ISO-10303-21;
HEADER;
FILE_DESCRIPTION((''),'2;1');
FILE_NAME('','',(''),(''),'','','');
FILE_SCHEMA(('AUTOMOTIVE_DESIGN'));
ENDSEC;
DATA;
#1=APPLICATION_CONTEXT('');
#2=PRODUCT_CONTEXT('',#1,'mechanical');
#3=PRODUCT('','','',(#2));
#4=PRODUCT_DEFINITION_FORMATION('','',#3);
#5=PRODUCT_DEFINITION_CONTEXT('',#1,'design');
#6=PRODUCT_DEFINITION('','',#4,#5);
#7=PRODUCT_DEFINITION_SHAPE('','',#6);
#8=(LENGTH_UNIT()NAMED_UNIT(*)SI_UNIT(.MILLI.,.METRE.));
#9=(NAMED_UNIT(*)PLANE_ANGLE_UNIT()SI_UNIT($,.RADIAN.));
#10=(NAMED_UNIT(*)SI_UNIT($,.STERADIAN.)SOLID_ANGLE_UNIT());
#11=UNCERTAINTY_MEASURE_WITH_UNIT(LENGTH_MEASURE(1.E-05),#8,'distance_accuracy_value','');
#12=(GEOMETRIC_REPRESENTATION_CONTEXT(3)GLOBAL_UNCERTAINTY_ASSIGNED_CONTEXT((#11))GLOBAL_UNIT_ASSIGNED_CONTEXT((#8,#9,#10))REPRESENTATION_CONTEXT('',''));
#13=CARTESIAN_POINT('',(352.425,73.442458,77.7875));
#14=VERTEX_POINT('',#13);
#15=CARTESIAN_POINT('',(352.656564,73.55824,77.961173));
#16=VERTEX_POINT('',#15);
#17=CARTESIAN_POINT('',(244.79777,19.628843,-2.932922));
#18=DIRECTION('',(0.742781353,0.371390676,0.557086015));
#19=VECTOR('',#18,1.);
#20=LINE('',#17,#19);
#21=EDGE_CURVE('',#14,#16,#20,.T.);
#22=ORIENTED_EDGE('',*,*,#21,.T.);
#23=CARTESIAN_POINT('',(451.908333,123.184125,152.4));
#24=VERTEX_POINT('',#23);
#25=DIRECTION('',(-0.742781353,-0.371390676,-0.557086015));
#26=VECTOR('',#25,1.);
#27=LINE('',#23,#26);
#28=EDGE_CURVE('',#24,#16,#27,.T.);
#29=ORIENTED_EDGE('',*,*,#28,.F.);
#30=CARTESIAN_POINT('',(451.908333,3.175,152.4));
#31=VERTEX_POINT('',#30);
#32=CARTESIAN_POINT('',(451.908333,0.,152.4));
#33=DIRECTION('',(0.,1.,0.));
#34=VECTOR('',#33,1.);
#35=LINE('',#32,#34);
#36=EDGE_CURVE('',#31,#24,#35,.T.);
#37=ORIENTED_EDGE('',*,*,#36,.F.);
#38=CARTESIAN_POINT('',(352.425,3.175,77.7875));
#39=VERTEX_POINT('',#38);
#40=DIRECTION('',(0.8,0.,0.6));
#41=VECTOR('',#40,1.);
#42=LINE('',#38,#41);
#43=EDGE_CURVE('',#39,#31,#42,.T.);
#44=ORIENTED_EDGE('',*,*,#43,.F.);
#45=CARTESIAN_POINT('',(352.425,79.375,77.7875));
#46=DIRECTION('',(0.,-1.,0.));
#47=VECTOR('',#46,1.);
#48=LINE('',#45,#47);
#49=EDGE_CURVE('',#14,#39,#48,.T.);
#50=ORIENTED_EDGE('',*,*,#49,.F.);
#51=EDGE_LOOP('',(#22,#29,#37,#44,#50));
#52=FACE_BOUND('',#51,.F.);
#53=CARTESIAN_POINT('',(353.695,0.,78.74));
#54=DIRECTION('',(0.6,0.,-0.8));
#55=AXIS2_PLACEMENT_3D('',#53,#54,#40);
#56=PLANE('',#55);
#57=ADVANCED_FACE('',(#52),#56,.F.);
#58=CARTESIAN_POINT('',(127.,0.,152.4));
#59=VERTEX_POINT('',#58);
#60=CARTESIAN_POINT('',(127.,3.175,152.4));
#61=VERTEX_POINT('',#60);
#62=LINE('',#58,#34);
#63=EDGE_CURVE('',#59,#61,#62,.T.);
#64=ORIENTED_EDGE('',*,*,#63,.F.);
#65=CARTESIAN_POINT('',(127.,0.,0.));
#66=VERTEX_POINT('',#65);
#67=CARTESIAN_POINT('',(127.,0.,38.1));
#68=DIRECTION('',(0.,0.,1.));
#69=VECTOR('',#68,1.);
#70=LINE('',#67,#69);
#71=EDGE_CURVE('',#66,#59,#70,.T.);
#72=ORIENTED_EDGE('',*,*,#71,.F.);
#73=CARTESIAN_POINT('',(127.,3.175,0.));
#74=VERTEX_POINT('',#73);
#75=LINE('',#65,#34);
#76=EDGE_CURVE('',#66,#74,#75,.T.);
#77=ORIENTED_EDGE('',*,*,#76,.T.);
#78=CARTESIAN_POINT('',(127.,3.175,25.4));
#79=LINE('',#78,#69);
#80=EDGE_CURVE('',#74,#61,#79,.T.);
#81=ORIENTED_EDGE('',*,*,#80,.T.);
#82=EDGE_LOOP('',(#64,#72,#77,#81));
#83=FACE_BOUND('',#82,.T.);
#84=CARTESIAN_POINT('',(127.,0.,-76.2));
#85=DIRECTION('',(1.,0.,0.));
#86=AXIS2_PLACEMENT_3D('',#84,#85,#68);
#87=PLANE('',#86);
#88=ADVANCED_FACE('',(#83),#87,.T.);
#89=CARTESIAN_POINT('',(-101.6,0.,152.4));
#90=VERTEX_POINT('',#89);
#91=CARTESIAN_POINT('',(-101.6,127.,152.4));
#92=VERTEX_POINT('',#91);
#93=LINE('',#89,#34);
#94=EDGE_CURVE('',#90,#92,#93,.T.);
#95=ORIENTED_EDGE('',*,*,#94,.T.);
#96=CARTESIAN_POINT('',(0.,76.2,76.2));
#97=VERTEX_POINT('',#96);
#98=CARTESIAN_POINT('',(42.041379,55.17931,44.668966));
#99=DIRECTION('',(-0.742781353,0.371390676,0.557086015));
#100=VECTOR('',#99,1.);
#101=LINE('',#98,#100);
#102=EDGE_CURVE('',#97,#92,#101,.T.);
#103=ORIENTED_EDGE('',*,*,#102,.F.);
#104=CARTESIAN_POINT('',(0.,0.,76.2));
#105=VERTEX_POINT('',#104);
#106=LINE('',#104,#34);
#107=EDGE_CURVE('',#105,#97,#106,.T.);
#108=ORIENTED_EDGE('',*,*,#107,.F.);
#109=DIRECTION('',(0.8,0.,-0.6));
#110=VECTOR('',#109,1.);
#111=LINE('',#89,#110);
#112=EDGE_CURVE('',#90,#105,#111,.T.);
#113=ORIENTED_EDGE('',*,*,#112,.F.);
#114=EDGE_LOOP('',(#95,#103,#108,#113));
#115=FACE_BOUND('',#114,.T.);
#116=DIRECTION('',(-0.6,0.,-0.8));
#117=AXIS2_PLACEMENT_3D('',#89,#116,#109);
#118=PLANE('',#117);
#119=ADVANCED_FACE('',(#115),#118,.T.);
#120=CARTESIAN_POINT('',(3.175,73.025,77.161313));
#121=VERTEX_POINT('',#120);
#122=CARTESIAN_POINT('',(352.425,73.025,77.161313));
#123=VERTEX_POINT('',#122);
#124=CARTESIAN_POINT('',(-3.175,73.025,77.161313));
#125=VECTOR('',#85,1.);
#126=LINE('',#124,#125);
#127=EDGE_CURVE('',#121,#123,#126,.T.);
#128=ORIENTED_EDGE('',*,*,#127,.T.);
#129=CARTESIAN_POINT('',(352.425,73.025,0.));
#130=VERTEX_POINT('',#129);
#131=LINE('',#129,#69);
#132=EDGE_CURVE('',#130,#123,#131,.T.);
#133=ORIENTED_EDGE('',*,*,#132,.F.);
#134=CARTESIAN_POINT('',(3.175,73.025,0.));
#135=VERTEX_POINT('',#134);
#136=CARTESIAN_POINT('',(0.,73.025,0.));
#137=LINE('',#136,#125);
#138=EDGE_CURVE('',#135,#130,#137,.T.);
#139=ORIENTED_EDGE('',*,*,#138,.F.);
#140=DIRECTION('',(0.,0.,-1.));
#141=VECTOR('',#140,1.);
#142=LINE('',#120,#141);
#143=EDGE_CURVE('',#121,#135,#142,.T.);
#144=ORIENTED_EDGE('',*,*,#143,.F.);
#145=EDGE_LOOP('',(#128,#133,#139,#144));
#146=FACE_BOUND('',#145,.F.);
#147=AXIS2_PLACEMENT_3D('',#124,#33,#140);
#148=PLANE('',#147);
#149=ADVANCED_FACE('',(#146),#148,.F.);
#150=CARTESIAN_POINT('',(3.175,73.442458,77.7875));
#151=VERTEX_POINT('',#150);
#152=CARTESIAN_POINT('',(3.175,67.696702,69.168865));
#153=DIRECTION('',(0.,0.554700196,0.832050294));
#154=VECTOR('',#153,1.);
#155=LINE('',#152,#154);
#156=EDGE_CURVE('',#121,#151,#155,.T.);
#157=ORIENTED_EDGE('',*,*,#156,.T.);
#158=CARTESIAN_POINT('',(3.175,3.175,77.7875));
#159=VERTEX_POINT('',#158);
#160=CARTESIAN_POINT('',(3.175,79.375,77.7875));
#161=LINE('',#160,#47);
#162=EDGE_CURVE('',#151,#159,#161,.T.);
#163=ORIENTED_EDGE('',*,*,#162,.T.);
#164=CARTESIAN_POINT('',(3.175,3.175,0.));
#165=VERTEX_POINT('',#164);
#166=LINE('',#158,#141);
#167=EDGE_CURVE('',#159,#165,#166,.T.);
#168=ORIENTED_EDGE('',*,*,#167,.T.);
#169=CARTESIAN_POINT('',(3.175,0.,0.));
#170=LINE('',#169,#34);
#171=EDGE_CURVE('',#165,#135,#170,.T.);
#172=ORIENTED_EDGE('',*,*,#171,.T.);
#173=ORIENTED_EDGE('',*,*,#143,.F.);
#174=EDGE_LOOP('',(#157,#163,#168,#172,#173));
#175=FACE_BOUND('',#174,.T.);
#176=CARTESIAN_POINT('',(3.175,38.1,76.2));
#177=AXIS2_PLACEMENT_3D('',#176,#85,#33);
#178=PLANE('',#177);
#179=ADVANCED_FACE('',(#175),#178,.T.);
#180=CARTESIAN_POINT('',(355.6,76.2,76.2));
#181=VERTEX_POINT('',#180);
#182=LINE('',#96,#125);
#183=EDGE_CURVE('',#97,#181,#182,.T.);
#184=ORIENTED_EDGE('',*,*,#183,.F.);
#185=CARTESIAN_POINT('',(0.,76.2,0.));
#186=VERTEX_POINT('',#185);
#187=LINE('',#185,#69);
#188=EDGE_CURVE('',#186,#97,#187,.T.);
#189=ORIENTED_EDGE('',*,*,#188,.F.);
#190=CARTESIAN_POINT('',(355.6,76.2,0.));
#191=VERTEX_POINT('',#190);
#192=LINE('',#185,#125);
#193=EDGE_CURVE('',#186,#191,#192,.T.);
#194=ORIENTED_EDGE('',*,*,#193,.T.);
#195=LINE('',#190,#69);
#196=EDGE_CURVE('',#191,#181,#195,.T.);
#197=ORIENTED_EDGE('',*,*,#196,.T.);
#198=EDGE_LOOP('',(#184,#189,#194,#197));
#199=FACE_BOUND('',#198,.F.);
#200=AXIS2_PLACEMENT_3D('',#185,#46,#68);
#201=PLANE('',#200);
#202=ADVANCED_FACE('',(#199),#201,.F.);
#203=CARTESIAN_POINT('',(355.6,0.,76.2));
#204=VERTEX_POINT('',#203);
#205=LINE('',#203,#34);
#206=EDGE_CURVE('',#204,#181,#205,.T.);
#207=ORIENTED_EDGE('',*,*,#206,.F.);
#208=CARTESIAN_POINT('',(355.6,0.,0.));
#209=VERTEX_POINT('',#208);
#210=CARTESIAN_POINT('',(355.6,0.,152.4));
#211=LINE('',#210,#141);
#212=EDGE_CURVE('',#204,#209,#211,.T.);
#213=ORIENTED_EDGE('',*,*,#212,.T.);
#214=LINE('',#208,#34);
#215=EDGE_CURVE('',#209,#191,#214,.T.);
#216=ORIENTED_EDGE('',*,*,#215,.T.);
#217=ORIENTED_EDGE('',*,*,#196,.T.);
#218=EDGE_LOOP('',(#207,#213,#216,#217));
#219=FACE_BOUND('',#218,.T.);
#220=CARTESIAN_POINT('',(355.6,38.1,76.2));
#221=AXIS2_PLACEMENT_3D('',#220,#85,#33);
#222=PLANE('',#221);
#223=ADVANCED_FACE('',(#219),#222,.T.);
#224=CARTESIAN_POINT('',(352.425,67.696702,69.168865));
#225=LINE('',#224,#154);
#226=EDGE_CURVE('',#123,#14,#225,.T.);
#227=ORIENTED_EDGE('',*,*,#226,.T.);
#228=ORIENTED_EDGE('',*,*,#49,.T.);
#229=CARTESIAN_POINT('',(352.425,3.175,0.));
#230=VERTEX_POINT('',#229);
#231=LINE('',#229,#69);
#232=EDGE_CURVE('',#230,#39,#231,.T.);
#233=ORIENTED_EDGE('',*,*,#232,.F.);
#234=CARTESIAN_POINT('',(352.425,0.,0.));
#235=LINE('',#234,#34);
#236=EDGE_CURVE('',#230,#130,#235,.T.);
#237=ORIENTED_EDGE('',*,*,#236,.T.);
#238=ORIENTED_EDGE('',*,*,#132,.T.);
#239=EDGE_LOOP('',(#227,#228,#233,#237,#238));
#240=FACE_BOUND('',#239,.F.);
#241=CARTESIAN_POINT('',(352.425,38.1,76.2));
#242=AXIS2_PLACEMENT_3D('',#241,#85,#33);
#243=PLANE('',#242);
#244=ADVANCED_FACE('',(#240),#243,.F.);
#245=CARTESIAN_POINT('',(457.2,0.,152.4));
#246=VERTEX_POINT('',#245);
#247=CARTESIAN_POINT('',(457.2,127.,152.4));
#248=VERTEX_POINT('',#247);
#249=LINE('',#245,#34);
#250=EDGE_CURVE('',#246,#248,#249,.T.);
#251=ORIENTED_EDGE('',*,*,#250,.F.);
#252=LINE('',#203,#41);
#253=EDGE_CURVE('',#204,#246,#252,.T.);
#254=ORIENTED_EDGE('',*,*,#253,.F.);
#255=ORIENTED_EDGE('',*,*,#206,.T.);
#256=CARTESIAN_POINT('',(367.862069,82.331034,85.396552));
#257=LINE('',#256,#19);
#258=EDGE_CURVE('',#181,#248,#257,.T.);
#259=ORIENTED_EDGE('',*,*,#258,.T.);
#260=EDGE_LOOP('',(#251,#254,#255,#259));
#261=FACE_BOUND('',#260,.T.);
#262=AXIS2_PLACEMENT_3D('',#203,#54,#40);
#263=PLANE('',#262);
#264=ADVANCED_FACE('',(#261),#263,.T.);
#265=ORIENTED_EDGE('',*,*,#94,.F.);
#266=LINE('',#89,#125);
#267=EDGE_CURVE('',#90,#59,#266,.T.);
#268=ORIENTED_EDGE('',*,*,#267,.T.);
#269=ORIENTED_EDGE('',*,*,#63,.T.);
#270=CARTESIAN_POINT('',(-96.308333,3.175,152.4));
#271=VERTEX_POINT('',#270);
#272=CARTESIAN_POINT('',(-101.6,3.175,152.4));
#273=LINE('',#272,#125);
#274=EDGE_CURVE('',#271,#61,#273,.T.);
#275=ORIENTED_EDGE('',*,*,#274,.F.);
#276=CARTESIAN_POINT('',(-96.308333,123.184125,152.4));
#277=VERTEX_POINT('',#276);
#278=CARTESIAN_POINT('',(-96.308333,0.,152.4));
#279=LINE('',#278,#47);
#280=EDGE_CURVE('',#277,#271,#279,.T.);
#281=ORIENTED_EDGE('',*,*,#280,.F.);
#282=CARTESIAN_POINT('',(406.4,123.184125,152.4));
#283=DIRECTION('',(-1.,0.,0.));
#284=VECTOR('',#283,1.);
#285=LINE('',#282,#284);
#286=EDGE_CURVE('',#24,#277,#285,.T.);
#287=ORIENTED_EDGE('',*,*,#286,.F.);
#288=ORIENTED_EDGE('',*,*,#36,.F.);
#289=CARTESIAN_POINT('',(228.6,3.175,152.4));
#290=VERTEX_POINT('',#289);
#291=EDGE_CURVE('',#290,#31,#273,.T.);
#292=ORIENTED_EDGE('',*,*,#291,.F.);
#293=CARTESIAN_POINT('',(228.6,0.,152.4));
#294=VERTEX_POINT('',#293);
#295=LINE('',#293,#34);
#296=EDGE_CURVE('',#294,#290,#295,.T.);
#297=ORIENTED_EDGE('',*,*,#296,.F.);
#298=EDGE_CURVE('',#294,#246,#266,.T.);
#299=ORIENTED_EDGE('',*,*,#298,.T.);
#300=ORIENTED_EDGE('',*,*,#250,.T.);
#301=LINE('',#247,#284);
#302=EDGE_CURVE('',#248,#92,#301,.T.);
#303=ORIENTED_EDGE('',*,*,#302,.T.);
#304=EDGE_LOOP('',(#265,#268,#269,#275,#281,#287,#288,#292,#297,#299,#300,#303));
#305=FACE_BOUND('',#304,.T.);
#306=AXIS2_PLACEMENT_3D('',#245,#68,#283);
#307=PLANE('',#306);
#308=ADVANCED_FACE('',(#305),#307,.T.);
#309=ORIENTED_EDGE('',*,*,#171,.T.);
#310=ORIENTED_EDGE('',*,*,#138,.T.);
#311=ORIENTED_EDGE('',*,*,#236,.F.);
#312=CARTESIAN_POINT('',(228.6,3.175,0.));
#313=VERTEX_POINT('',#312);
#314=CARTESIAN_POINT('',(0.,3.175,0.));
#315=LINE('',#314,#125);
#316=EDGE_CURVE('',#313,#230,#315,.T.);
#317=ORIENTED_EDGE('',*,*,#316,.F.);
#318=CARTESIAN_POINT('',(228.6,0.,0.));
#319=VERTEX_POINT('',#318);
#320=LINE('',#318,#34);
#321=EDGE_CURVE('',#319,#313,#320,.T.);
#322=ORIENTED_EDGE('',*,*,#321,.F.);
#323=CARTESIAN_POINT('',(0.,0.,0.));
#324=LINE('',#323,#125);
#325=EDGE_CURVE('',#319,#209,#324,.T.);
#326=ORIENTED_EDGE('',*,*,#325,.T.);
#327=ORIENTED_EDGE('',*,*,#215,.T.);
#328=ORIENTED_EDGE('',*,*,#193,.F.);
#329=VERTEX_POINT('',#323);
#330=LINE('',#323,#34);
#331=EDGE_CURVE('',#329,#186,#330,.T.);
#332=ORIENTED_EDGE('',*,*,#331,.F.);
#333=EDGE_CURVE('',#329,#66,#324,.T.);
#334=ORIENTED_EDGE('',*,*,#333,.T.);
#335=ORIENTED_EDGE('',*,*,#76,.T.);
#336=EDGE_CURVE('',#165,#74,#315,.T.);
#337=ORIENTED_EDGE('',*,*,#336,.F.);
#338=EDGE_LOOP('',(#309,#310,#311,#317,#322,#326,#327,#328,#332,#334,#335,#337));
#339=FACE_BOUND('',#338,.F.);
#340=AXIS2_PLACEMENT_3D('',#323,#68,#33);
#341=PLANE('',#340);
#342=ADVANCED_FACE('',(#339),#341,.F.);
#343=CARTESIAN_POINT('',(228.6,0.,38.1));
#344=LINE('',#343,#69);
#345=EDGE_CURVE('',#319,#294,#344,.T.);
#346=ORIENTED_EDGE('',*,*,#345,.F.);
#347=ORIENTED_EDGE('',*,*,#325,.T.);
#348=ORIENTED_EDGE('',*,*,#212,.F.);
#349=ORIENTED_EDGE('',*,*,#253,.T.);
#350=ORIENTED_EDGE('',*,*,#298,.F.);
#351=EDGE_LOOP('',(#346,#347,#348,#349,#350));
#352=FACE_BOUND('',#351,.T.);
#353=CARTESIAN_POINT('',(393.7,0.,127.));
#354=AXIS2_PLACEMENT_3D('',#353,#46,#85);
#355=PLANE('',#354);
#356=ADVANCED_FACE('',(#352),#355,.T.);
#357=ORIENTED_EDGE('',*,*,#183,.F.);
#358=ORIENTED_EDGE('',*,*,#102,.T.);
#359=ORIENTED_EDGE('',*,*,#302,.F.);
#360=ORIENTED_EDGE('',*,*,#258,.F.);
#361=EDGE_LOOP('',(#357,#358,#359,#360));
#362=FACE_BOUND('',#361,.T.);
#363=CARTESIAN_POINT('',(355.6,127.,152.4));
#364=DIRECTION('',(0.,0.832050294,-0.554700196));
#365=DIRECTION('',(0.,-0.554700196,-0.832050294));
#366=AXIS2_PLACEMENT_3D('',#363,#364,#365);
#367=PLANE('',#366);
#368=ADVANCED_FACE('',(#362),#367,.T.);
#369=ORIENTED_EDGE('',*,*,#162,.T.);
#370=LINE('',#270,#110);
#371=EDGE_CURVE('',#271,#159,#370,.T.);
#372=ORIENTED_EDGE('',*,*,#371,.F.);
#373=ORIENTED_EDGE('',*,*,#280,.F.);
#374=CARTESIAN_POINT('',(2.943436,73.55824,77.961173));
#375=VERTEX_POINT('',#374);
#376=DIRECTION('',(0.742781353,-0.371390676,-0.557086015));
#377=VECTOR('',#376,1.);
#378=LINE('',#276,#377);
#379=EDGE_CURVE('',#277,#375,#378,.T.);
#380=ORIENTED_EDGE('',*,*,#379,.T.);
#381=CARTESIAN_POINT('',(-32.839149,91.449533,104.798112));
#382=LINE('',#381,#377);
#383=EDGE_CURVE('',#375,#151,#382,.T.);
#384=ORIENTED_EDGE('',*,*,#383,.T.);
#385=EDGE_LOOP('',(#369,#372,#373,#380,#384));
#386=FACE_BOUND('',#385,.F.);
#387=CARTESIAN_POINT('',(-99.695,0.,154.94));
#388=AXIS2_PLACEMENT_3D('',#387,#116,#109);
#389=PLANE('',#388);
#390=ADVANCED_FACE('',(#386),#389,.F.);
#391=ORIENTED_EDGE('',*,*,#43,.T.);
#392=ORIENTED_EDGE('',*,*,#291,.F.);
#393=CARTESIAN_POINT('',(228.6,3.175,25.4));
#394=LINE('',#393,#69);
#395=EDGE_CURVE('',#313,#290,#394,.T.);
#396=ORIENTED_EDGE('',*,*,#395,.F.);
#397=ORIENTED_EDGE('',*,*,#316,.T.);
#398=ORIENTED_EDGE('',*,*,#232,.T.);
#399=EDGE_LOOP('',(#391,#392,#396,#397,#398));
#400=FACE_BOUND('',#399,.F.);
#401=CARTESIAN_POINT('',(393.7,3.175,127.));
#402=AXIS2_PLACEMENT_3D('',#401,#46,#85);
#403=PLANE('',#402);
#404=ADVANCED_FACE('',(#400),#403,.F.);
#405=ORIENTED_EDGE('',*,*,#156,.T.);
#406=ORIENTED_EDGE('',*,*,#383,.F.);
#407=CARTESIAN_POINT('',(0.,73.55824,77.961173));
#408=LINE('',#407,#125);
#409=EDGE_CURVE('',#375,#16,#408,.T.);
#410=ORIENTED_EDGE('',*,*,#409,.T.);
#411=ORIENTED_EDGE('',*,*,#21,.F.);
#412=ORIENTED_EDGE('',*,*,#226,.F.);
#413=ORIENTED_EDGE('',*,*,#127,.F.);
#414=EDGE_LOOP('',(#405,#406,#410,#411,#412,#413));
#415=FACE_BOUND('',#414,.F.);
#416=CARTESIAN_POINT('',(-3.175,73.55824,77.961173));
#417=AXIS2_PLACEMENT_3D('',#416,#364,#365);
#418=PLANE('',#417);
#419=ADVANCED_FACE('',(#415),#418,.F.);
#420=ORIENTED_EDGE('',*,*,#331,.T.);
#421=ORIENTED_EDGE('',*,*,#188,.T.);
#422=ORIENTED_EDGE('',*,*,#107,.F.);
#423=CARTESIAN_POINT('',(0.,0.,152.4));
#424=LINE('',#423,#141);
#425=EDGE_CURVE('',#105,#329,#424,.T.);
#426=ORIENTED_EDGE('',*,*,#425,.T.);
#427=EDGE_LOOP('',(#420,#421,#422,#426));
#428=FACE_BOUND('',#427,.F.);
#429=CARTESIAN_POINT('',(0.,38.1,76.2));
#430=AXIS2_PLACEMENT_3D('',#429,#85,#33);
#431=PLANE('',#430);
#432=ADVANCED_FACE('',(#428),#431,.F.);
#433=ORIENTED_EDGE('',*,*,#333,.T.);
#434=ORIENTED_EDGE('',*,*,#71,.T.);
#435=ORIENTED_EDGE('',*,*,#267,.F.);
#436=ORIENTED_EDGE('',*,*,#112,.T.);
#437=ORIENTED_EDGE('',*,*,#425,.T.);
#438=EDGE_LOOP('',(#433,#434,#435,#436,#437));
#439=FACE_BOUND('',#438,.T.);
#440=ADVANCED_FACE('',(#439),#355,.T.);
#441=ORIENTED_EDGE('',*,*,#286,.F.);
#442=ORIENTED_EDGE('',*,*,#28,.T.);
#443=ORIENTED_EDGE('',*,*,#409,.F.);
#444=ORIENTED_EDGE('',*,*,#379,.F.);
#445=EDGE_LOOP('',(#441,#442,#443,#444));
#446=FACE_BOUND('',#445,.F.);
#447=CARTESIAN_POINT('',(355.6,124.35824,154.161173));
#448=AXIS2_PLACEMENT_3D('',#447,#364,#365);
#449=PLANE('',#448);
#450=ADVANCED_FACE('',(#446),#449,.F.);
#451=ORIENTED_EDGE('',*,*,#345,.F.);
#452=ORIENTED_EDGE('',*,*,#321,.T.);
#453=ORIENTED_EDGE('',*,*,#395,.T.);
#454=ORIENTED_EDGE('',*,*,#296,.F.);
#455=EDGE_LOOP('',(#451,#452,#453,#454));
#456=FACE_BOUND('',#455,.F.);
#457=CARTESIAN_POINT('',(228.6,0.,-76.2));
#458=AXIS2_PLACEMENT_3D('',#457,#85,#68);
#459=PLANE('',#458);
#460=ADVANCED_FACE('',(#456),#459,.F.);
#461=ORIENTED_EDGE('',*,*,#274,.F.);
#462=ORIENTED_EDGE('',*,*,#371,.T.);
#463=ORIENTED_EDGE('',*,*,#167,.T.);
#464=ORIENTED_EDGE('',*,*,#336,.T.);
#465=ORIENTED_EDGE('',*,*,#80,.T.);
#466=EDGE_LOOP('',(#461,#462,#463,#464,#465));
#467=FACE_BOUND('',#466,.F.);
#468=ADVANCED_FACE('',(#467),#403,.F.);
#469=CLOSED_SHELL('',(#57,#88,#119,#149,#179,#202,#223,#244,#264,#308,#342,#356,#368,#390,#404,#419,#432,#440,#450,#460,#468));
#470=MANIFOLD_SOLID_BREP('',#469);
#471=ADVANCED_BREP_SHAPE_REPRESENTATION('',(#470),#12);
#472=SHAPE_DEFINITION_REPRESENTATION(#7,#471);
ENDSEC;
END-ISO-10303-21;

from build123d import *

# Parameters (mm, degrees)
F1_DEPTH    = 355.6
F2_W        = 355.6
F2_H        = 76.2
F3_DEPTH    = 127
F5_DEPTH    = 457.201
F6_DEPTH    = 101.601
F7_T        = 3.175
F7_T3_DEPTH = 82.55
F7_T5_DEPTH = 361.95
F8_W        = 101.6
F8_H        = 228.6
F9_DEPTH    = 25.4


# Not quite as in the source:
# - a shell that OpenCascade refuses in one call is made with other operations: the cavity is built on its own and cut out


with BuildPart() as f1:
    # F0 (on Right) → F1 (new body)
    with BuildSketch(Plane.YZ):
        Polygon((0, 152.4), (0, 0), (76.2, 0), (76.2, 76.2), (76.2, 152.4), align=None)
        Polygon((76.2, 152.4), (76.2, 76.2), (127, 152.4), align=None)
    extrude(amount=F1_DEPTH)

    # F2 (on face) → F3 (join)
    with BuildSketch(Plane.XZ):
        Polygon((457.2, 152.4), (355.6, 152.4), (355.6, 76.2), align=None)
        Polygon((0, 76.2), (0, 152.4), (-101.6, 152.4), align=None)
        with Locations((177.8, 114.3)):
            Rectangle(F2_W, F2_H)
    extrude(amount=-F3_DEPTH)

    # F4 (on face) → F5 (cut, through all)
    with BuildSketch(Plane.YZ.offset(355.6)):
        Polygon((76.2, 76.2), (127, 76.2), (127, 152.4), align=None)
    extrude(amount=-F5_DEPTH, mode=Mode.SUBTRACT)

    # F4 (on face) → F6 (cut, through all)
    with BuildSketch(Plane.YZ.offset(355.6)):
        Polygon((76.2, 76.2), (127, 76.2), (127, 152.4), align=None)
    extrude(amount=F6_DEPTH, mode=Mode.SUBTRACT)

    # F7: shell of thickness 3.175, made by hand


with BuildPart() as f7_core1:
    # F7_t2: copy of F1
    add(f1.part)

    # the walls: a layer under each face that stays
    f7_faces = [f7_core1.faces().sort_by_distance(p)[0] for p in [
        (177.8, 0, 76.2),
        (-50.8, 63.5, 114.3),
        (177.8, 101.6, 114.3),
        (177.8, 76.2, 38.1),
        (0, 38.1, 38.1),
        (355.6, 38.1, 38.1),
        (406.4, 63.5, 114.3),
    ]]
    thicken(f7_faces, amount=-F7_T, mode=Mode.SUBTRACT)

    # F7_s4 → F7_t3 (cut)
    with BuildSketch(Plane.XZ.offset(-79.375)):
        Polygon((-0.0508, 76.1746), (1.905, 78.74), (3.175, 77.7875), (3.175, 76.2), align=None)
        Polygon((355.6508, 76.1746), (352.425, 76.2), (352.425, 77.7875), (353.695, 78.74), align=None)
    extrude(amount=F7_T3_DEPTH, mode=Mode.SUBTRACT)

    # F7_s6 → F7_t5 (cut)
    with BuildSketch(Plane.YZ.offset(-3.175)):
        Polygon((76.2581675968, 76.1823882688), (73.5582403155, 77.961173123), (73.025, 77.1613126498), (73.025, 76.2), align=None)
    extrude(amount=F7_T5_DEPTH, mode=Mode.SUBTRACT)


with BuildPart() as f1_1:
    add(f1.part)

    # what is left inside the walls is the cavity
    f7_cavity = [f7_core1.part.solids().sort_by_distance(p)[0] for p in [
        (269.169444, 63.179562, 152.36825),
    ]]
    add(f7_cavity, mode=Mode.SUBTRACT)

    # F8 (on face) → F9 (cut)
    with BuildSketch(Plane.XZ):
        with Locations((177.8, 38.1)):
            Rectangle(F8_W, F8_H)
    extrude(amount=-F9_DEPTH, mode=Mode.SUBTRACT)


solid = f1_1.part
